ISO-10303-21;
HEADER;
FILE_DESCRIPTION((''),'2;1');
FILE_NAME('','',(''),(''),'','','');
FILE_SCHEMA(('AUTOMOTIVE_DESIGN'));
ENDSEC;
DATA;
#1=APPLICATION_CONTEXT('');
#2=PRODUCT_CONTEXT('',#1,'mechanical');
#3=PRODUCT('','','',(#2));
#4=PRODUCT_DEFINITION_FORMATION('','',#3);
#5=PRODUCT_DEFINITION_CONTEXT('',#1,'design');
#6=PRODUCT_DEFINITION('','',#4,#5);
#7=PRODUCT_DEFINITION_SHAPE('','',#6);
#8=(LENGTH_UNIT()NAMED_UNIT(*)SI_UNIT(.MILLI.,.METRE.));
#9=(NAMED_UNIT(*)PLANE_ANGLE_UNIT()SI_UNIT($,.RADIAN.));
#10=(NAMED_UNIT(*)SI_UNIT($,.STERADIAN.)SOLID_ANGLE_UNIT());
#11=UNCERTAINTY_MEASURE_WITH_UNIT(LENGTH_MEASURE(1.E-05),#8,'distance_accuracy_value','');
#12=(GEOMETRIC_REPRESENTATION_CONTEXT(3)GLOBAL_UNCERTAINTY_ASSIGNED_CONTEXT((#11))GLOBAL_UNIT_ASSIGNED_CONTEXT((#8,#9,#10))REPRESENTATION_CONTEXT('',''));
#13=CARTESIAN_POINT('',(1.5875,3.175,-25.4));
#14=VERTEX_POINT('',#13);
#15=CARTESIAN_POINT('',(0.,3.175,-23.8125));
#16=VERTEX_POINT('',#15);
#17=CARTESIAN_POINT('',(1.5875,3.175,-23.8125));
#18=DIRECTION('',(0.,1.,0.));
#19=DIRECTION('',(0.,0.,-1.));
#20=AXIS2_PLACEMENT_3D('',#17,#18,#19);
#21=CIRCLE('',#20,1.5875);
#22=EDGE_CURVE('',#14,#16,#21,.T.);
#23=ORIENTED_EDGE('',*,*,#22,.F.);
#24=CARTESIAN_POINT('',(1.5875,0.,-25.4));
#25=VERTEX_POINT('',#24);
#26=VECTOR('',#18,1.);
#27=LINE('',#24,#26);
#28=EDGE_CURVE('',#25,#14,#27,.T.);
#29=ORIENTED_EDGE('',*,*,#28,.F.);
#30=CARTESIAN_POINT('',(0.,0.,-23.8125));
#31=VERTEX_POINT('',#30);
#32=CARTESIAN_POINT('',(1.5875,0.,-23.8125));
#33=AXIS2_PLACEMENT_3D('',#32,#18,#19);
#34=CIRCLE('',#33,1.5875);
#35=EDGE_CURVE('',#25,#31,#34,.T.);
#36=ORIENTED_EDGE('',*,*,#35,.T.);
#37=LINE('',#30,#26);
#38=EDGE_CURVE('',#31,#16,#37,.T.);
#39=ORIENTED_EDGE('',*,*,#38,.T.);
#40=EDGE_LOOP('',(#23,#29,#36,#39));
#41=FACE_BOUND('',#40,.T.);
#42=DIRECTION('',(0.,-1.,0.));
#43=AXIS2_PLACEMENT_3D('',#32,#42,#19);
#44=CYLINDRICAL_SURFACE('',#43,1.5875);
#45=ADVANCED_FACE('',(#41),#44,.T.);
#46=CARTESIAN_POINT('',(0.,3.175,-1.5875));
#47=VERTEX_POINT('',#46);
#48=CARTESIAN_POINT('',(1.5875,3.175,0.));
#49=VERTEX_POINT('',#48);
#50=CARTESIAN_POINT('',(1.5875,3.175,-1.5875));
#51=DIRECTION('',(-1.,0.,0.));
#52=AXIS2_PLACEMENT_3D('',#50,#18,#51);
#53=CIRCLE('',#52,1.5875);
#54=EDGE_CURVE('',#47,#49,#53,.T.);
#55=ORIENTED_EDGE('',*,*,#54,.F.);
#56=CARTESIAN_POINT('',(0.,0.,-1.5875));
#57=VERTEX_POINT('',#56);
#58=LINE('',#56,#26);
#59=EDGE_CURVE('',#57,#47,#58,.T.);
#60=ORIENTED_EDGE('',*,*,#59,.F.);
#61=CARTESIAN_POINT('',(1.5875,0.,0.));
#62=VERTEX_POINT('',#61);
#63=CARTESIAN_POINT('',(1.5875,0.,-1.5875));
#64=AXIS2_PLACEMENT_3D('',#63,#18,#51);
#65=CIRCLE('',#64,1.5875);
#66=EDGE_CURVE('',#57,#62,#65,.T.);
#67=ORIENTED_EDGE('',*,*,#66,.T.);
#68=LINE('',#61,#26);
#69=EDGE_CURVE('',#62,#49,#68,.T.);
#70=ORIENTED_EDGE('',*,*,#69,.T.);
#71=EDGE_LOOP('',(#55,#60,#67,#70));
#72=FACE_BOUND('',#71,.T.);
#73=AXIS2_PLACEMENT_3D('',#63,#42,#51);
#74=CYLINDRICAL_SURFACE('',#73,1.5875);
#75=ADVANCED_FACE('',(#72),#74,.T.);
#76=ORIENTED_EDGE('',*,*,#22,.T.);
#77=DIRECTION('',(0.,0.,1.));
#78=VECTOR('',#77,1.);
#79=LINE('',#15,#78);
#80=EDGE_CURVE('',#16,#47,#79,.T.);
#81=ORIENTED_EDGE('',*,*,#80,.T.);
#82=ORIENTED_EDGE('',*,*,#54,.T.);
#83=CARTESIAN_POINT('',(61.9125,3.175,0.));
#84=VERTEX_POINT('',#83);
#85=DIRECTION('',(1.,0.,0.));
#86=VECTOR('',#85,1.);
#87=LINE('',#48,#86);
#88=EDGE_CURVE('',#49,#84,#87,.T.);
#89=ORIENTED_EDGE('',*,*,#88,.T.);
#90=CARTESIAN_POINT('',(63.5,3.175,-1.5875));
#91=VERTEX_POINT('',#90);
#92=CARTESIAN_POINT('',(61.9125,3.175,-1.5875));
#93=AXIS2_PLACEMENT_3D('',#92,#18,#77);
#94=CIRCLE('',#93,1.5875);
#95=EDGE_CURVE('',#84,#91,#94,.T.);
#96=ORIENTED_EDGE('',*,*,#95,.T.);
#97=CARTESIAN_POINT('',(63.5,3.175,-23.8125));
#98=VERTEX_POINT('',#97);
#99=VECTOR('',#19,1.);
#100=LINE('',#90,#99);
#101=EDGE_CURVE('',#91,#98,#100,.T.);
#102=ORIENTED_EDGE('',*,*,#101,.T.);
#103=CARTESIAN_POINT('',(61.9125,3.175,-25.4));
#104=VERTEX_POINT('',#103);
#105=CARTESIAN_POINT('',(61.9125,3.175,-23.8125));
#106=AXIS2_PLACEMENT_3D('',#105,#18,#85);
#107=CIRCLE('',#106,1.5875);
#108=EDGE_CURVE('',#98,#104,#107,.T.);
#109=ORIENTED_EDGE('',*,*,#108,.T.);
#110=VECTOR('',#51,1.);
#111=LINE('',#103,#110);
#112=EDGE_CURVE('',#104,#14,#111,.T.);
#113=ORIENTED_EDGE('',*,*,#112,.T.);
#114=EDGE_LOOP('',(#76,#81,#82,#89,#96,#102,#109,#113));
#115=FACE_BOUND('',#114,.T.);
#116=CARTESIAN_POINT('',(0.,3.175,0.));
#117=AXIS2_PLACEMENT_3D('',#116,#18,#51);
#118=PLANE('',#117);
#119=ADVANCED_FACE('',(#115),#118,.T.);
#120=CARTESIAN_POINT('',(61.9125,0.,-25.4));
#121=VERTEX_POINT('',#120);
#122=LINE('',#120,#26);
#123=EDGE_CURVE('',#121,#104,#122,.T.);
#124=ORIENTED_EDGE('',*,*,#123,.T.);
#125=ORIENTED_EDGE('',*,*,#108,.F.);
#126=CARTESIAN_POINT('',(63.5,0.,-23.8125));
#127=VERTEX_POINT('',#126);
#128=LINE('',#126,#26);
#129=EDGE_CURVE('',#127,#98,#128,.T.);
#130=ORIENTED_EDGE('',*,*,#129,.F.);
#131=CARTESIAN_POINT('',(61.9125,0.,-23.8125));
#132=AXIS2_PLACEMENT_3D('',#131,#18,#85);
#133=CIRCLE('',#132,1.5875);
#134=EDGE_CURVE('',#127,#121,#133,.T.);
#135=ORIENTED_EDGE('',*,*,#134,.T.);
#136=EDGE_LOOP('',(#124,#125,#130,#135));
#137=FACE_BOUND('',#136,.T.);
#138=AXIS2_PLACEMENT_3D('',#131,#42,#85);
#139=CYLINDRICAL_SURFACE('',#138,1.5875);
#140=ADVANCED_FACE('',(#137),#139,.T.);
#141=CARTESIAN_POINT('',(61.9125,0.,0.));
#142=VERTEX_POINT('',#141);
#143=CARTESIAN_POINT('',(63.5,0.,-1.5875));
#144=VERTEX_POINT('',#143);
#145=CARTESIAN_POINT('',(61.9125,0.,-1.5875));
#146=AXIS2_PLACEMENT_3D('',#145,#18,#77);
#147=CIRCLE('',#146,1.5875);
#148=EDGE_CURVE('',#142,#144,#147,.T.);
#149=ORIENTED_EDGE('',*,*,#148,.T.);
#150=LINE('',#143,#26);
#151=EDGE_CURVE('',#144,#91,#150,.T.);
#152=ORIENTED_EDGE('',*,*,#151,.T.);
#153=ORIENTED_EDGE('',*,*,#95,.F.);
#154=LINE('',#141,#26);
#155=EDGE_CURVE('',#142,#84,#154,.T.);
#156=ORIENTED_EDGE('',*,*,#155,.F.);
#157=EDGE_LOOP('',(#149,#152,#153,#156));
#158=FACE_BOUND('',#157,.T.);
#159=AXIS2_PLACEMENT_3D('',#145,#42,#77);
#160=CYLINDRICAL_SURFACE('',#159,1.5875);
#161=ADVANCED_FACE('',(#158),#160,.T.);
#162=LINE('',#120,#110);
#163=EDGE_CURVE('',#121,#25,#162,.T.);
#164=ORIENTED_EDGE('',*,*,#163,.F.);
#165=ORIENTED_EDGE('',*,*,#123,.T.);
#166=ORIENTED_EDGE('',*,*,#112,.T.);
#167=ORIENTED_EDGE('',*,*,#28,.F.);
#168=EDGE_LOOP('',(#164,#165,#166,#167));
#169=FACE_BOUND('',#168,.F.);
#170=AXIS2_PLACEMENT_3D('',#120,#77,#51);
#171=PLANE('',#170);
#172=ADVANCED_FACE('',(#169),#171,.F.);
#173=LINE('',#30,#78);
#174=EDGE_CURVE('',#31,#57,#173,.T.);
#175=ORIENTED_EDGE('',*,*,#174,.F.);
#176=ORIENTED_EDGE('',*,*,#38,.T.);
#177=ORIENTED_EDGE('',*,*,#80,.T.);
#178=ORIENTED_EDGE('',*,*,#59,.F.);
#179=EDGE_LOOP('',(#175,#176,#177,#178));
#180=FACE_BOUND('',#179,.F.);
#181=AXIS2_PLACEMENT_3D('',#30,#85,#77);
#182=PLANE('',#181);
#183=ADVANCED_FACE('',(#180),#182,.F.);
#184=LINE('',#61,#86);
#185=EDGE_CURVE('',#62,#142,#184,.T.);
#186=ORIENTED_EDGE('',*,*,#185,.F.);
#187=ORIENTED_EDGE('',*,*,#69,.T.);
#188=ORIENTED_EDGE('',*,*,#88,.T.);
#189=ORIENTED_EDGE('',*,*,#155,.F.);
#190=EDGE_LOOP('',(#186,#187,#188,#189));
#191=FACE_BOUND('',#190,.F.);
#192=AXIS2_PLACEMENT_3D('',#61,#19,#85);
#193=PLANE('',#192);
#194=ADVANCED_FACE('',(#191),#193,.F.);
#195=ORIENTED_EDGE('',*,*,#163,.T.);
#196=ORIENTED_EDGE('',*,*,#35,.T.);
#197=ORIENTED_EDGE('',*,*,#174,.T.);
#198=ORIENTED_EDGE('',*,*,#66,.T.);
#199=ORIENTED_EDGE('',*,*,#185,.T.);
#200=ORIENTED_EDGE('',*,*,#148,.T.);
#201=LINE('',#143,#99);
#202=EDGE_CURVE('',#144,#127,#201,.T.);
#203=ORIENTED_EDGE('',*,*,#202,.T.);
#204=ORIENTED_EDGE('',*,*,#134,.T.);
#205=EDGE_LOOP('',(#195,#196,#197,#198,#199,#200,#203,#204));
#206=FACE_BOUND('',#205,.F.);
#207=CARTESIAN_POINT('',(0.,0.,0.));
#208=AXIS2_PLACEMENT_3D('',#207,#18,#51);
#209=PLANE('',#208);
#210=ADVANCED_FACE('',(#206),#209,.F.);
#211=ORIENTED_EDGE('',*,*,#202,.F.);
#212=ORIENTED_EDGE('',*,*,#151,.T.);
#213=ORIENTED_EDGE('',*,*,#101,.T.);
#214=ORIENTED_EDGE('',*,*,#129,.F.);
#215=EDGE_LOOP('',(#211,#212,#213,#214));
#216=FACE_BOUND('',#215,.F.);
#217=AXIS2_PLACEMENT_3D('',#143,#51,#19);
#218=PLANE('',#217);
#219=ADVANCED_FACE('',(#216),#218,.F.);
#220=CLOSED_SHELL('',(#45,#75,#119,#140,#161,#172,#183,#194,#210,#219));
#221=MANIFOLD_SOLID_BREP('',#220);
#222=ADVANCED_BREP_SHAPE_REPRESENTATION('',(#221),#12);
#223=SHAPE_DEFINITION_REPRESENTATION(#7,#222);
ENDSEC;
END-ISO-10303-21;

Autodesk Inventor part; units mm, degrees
ref_plane "YZ Plane" through (0, 0, 0) normal (1, 0, 0) x (0, 1, 0)
ref_plane "XZ Plane" through (0, 0, 0) normal (0, 1, 0) x (-1, 0, 0)
ref_plane "XY Plane" through (0, 0, 0) normal (0, 0, 1) x (1, 0, 0)
sketch "Sketch1" plane through (0, 0, 0) normal (0, 1, 0) x (-1, 0, 0)
  arc A0 (-63.5, -23.8125) -> (-61.9125, -25.4) centre (-61.9125, -23.8125) ccw
  line L0 (-61.9125, -25.4) -> (-1.5875, -25.4)
  arc A1 (-1.5875, -25.4) -> (0, -23.8125) centre (-1.5875, -23.8125) ccw
  line L1 (0, -23.8125) -> (0, -1.5875)
  arc A2 (0, -1.5875) -> (-1.5875, 0) centre (-1.5875, -1.5875) ccw
  line L2 (-1.5875, 0) -> (-61.9125, 0)
  arc A3 (-61.9125, 0) -> (-63.5, -1.5875) centre (-61.9125, -1.5875) ccw
  line L3 (-63.5, -1.5875) -> (-63.5, -23.8125)
  circle A4 centre (-53.975, -12.7) radius 3.302
  circle A5 centre (-9.525, -12.7) radius 3.302
  point P0 (0, 0)
  point P1 (0, 0)
extrude "Plate1" add sketch "Sketch1" along normal blind 3.175 contours L3 A3 L2 A2 L1 A1 L0 A0 | A4 | A5
equation "\"BendRadius\" = Thickness"
equation "\"BendReliefWidth\" = Thickness"
equation "\"BendReliefDepth\" = 0.5 * Thickness"
equation "\"CornerReliefSize\" = 4 * Thickness"
equation "\"MinimumRemnant\" = 2 * Thickness"
equation "\"TransitionRadius\" = BendRadius"
equation "\"JacobiRadiusSize\" = BendRadius"
equation "\"GapSize\" = Thickness"
equation "\"d0\" = BendRadius"
equation "\"Thickness\" = 3.175"
properties part number "Support for bracket" material "Aluminum 6061"
